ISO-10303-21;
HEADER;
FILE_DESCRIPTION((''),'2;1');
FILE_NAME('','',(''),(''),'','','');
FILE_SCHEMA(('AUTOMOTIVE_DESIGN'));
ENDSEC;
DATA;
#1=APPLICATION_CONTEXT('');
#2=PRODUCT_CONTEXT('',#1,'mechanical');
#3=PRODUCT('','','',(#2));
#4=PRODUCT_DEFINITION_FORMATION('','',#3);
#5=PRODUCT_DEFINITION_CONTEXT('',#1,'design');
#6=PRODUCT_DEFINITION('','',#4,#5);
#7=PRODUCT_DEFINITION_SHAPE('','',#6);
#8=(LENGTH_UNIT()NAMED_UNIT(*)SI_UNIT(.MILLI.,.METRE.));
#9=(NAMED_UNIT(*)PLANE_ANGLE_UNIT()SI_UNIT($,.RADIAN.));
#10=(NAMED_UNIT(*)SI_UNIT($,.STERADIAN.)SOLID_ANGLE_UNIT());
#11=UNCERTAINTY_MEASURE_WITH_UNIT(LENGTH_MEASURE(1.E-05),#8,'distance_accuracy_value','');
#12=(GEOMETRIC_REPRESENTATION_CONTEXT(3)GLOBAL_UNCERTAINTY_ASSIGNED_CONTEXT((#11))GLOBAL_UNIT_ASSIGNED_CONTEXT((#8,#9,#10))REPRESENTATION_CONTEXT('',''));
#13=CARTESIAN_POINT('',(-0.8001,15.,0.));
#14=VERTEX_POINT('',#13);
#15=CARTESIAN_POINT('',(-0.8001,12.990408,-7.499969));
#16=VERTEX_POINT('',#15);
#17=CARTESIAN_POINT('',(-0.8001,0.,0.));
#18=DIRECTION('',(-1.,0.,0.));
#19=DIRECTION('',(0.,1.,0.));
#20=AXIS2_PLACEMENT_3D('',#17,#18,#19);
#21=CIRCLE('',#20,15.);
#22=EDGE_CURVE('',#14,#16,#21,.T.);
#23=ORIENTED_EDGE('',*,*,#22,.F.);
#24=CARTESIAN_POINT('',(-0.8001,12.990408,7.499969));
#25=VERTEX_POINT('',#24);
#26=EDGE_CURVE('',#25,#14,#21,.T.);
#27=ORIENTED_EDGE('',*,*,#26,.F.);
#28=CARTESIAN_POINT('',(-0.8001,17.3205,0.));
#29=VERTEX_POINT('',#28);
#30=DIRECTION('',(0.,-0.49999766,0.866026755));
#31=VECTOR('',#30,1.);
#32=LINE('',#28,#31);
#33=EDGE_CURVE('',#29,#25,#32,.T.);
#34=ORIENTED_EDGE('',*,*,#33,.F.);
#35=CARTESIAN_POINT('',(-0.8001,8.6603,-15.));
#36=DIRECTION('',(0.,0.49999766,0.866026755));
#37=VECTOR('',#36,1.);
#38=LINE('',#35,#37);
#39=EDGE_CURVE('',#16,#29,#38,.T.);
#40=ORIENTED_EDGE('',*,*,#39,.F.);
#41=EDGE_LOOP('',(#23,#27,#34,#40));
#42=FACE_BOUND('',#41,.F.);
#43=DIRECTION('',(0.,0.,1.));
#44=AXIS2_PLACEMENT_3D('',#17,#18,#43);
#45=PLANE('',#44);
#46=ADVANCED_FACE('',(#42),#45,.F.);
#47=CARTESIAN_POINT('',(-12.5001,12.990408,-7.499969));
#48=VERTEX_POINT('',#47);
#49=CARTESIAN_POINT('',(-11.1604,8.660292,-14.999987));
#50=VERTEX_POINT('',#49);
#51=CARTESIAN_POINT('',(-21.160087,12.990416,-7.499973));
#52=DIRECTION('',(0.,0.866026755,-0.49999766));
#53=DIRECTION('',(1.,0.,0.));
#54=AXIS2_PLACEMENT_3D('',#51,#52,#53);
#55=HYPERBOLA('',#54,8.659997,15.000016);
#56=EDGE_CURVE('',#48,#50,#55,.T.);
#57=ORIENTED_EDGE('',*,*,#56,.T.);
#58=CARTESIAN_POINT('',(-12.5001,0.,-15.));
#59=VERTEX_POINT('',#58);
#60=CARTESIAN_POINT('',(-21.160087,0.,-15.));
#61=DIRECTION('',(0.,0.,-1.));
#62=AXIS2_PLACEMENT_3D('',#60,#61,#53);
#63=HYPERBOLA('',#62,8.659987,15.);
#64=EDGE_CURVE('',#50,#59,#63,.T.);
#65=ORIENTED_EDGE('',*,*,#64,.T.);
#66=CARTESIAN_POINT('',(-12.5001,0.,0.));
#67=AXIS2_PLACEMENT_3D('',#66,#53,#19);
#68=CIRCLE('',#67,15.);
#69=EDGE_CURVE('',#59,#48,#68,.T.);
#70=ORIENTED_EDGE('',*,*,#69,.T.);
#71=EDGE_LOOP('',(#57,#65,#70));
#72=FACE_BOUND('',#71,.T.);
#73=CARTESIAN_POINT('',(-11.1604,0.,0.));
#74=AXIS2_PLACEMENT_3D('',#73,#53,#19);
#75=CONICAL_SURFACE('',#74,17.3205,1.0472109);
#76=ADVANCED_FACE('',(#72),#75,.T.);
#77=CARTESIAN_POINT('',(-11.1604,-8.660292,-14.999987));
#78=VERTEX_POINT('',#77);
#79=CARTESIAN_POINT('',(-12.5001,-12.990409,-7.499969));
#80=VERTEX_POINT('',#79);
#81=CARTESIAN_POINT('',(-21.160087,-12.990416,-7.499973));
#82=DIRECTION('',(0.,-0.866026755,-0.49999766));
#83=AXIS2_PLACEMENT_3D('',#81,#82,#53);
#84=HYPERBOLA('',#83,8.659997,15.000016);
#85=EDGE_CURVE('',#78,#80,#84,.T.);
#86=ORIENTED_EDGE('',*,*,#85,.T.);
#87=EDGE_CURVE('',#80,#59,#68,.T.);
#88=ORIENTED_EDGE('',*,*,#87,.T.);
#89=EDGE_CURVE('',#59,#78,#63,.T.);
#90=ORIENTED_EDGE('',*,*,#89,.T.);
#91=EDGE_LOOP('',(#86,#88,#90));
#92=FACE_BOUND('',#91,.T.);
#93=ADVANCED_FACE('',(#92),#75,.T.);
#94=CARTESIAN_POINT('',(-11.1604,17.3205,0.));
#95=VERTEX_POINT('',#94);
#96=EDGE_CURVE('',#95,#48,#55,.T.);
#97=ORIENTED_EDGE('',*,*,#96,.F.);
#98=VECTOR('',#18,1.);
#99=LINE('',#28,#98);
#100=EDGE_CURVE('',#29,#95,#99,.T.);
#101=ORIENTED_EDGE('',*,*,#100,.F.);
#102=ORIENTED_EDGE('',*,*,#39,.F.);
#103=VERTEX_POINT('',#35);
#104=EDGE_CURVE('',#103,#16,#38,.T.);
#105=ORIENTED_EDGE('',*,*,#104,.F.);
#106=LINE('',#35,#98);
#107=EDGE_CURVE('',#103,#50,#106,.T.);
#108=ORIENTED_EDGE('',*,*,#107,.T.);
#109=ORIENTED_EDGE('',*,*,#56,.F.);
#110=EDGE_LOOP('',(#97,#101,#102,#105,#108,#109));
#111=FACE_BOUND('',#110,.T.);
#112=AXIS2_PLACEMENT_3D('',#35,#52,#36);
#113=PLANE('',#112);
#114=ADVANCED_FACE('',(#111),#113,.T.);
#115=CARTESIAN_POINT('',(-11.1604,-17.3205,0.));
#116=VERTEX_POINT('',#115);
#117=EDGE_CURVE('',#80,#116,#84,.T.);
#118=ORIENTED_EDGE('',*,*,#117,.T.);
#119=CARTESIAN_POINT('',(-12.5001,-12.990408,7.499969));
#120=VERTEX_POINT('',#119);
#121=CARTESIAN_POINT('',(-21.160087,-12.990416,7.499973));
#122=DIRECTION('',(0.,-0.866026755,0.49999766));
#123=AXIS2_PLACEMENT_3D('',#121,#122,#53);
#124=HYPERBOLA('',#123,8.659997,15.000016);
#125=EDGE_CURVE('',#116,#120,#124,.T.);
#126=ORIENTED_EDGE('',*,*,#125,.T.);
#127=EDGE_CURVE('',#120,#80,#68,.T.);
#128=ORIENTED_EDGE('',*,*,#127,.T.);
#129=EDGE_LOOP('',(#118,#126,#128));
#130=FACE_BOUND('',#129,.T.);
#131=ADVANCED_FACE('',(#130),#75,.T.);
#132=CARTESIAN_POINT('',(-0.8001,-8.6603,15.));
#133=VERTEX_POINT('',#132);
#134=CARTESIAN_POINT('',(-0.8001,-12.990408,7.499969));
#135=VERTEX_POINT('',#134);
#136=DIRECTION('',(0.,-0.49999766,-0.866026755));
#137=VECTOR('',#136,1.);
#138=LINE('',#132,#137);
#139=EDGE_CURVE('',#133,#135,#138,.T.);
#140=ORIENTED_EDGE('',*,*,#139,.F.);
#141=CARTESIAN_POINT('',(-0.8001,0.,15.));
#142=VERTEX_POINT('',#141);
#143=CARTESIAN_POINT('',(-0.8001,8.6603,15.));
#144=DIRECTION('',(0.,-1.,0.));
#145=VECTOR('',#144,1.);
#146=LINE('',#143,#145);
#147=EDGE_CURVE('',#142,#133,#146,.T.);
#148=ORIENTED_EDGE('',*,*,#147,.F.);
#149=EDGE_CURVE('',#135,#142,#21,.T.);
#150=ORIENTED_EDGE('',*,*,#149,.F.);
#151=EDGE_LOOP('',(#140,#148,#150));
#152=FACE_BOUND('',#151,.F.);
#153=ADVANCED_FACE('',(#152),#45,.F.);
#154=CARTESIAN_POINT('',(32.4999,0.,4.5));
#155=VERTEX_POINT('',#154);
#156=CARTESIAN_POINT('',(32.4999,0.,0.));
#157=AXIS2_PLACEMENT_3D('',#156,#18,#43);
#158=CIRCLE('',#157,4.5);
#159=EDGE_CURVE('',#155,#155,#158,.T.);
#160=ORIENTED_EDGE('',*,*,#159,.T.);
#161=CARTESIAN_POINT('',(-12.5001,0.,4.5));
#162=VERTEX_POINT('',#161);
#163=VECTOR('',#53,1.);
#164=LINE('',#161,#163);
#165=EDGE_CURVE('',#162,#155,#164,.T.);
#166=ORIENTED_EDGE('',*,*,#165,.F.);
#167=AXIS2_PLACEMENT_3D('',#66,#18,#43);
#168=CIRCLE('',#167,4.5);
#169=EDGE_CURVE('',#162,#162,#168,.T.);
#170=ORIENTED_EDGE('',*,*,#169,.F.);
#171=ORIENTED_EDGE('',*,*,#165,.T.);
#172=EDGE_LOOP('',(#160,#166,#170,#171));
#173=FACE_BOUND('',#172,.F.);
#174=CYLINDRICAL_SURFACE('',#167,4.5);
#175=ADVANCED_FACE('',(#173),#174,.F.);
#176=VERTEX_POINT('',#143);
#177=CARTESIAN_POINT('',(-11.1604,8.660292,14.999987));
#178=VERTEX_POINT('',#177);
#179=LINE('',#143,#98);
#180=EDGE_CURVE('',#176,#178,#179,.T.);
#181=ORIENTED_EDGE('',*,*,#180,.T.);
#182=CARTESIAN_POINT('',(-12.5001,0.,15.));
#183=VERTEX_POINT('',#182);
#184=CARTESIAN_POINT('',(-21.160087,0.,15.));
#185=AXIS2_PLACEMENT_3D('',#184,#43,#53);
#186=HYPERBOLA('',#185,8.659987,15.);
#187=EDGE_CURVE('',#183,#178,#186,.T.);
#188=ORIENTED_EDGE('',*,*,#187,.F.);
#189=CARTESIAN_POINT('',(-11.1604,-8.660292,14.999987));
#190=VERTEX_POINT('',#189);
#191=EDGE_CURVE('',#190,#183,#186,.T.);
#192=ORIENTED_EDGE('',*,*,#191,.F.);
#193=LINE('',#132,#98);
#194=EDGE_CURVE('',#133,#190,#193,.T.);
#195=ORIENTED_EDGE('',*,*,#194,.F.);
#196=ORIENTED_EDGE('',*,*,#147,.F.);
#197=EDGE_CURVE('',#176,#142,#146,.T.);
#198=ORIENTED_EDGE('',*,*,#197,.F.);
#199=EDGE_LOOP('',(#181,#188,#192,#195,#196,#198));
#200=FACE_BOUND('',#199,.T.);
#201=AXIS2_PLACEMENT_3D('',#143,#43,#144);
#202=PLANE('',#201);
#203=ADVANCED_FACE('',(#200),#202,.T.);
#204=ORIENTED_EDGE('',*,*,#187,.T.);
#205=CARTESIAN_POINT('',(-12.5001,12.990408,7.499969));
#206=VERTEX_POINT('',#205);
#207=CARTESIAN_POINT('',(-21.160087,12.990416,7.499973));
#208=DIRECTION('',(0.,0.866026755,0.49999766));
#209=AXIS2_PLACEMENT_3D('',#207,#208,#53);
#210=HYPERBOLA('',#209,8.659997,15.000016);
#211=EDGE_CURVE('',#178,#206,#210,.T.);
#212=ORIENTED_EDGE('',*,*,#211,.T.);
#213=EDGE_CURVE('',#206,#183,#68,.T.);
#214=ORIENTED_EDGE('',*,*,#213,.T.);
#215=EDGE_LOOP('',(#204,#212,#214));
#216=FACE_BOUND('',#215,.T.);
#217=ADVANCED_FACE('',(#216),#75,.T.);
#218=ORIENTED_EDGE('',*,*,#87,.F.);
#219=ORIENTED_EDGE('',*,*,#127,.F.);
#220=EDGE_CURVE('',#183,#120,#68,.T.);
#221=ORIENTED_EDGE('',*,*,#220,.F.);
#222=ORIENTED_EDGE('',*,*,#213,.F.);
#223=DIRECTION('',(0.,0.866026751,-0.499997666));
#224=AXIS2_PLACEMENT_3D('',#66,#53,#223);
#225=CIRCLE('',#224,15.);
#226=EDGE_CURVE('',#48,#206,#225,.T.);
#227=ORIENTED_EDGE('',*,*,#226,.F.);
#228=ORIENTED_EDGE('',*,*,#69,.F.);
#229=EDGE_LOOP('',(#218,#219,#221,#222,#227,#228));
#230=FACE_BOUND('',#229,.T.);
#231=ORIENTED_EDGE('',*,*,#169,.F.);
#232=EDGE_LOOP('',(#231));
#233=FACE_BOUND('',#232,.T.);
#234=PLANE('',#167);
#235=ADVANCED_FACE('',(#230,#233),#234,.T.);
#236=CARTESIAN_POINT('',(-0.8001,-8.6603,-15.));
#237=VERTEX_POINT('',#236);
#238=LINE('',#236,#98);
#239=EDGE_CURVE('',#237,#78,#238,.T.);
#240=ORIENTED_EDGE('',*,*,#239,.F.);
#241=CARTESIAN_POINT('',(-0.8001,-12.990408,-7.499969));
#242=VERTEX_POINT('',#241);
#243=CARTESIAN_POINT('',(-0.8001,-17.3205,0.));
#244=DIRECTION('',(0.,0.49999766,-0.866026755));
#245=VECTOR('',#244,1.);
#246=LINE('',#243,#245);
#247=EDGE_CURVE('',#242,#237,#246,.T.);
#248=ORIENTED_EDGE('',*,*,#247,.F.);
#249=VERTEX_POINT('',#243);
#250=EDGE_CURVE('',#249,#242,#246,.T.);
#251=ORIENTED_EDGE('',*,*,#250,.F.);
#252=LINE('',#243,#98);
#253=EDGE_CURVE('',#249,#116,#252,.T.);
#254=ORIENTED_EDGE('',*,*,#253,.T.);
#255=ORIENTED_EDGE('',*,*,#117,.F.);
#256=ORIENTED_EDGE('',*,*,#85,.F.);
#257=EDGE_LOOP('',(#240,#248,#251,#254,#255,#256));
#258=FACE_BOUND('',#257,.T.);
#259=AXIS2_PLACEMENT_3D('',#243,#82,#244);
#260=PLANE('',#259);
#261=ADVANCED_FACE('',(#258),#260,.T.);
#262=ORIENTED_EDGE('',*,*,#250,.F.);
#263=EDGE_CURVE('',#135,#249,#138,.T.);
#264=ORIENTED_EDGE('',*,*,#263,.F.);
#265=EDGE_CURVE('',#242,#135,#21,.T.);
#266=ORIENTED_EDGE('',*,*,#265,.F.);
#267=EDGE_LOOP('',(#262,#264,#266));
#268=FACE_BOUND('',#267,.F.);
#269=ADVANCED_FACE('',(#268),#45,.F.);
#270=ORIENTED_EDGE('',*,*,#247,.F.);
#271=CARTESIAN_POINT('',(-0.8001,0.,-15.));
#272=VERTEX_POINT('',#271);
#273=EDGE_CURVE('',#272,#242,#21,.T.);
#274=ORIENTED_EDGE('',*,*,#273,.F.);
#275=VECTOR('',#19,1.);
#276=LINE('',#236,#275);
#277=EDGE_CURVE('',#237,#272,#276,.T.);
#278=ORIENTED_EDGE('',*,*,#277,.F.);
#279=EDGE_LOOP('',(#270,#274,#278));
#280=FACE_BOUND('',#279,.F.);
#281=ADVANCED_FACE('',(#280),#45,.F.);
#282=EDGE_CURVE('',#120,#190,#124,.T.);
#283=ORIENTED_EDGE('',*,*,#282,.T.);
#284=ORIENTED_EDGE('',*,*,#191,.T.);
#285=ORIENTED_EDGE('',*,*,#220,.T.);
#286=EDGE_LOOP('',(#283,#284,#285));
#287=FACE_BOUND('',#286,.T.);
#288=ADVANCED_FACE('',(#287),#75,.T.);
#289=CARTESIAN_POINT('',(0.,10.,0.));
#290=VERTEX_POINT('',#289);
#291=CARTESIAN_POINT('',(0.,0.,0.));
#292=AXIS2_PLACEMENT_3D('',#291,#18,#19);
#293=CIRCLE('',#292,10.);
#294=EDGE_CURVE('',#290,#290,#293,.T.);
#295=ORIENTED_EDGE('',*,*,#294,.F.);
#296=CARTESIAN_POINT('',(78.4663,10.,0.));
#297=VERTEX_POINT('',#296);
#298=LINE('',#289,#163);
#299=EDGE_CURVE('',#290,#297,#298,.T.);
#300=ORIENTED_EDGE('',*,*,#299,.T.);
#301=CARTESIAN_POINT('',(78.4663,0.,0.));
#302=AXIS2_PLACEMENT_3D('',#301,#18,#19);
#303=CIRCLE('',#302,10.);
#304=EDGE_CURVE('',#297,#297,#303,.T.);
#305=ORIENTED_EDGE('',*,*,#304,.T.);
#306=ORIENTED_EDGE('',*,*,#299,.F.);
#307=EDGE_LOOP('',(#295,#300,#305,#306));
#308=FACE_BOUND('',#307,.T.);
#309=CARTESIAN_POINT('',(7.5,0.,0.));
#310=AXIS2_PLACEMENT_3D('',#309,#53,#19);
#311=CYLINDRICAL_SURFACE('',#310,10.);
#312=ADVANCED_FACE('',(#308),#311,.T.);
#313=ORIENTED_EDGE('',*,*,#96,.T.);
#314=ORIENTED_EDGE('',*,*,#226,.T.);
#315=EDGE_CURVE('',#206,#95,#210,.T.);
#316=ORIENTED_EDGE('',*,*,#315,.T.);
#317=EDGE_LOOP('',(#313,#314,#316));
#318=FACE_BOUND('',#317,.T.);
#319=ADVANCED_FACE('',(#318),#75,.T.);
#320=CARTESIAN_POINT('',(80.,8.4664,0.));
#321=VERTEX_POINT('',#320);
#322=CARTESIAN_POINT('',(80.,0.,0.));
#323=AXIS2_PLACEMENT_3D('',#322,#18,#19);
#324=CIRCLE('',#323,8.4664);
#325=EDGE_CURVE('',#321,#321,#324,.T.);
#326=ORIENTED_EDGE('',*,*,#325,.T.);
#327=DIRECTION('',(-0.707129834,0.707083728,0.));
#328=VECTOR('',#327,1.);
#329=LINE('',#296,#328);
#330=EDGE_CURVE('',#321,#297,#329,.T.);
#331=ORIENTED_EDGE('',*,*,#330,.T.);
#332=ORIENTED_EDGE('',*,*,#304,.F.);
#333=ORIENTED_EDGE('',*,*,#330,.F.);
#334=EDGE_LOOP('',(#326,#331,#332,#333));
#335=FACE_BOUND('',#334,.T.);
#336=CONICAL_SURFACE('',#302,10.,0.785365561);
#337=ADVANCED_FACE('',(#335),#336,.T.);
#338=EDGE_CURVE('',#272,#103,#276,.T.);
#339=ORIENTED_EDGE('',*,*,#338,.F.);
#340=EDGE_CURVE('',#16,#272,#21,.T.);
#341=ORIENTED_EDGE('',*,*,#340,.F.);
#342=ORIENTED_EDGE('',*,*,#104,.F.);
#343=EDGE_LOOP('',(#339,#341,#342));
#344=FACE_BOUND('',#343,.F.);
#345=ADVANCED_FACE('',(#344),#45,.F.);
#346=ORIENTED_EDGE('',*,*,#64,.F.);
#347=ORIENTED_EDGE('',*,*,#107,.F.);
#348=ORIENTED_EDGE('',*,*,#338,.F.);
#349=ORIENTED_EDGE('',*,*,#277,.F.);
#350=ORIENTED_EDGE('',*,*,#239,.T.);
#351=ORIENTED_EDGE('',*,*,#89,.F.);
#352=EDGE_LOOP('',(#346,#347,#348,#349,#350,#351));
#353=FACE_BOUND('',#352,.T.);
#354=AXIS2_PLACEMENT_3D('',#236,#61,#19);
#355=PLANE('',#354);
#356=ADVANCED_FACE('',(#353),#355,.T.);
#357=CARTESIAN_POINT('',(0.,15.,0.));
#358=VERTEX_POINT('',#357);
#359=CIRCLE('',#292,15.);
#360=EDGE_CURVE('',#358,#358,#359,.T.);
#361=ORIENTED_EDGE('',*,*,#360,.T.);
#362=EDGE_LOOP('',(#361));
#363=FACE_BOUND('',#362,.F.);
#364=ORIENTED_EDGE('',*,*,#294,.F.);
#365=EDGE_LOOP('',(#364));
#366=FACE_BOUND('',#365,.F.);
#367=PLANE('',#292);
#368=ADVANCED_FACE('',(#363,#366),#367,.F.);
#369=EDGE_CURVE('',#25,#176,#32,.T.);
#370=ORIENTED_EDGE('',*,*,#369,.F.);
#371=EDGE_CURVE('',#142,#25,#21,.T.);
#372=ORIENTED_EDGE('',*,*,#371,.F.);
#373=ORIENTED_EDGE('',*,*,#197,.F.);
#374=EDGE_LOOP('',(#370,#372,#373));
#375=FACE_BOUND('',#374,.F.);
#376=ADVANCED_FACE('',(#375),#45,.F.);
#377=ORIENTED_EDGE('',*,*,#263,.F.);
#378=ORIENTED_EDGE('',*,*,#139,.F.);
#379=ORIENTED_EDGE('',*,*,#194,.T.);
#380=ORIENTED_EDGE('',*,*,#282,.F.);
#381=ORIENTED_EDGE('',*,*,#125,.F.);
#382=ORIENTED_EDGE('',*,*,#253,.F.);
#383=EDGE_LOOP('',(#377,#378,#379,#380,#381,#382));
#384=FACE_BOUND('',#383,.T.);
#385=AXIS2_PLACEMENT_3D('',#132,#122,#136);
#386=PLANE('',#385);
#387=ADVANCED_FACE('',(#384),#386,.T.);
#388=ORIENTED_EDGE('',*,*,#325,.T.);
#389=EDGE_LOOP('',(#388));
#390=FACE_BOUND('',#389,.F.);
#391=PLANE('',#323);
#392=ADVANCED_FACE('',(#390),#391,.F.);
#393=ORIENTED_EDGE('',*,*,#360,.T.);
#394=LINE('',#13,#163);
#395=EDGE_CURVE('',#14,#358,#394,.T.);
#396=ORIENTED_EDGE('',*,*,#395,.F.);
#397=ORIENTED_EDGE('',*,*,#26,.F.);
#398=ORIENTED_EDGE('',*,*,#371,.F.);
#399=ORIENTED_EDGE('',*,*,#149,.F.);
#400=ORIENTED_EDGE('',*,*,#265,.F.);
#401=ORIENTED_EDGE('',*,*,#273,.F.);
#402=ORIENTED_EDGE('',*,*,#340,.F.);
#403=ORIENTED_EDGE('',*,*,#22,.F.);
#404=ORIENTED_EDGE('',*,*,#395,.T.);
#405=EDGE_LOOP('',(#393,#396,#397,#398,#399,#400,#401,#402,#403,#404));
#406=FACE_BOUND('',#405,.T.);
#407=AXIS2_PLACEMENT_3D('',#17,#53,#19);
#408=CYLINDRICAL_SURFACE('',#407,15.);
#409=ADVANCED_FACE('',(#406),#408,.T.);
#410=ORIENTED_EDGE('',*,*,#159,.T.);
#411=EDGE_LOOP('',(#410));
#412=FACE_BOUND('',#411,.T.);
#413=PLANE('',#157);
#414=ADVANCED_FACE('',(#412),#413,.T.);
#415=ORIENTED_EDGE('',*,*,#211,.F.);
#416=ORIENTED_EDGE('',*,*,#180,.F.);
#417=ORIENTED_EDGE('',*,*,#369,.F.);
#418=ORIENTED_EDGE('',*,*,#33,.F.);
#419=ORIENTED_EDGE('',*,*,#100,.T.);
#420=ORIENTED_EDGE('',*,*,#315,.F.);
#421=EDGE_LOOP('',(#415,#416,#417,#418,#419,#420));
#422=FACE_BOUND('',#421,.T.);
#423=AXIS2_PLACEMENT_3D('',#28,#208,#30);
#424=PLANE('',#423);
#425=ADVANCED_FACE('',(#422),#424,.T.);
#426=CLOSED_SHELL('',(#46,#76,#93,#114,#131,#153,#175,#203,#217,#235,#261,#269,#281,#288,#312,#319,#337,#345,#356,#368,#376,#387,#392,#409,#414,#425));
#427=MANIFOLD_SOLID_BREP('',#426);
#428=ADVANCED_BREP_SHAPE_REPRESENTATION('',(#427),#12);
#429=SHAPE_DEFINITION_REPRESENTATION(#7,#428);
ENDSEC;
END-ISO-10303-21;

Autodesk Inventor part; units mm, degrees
ref_plane "YZ Plane" through (0, 0, 0) normal (1, 0, 0) x (0, 1, 0)
ref_plane "XZ Plane" through (0, 0, 0) normal (0, 1, 0) x (-1, 0, 0)
sketch "Sketch1" plane through (0, 0, 0) normal (0, 0, 1) x (1, 0, 0)
  line L0 (0, 15) -> (0, 10)
  line L1 (7.5, 10) -> (80, 10)
  line L2 (80, 10) -> (80, 0)
  line L3 (80, 0) -> (-0.8001, 0)
  line L4 (-16.9601, 0) -> (96.16, 0) projected
  line L5 (-0.8001, 0) -> (-0.8001, 15)
  line L6 (-0.8001, 15) -> (0, 15)
  line L7 (7.5, 10) -> (5.9663, 10)
  line L8 (5.9663, 10) -> (0, 10)
  line L9 (0, -3) -> (0, 18) projected
  dimension "d0" = 80
  dimension "d1" = 72.5
  dimension "d2" = 20
  dimension "d9" = 0.8001
  dimension "d10" = 30
  dimension "d13" = 1.5337
  dimension "d14" = 20
revolve "Body" add sketch "Sketch1" angle 360 about axis through (80, 0, 0) along (-1, 0, 0)
sketch "Sketch2" plane through (-0.8001, 0, 0) normal (-1, 0, 0) x (0, 0, 1)
  line L0 (0, 17.3205) -> (15, 8.6603)
  line L1 (15, 8.6603) -> (15, -8.6603)
  line L2 (15, -8.6603) -> (0, -17.3205)
  line L3 (0, -17.3205) -> (-15, -8.6603)
  line L4 (-15, -8.6603) -> (-15, 8.6603)
  line L5 (-15, 8.6603) -> (0, 17.3205)
  point P0 (0, 0)
  point P1 (0, 0)
  dimension "d11" = 30
extrude "Head" add sketch "Sketch2" along normal blind 11.7
sketch "Sketch4" plane through (0, 0, 0) normal (0, 0, 1) x (1, 0, 0)
  line L0 (-12.5001, 15) -> (-12.5001, 17.3205)
  line L1 (-12.5001, 17.3205) -> (-11.1604, 17.3205)
  line L2 (-11.1604, 17.3205) -> (-12.5001, 15)
  line L3 (-14.8401, 0) -> (1.5399, 0) projected
  line L4 (-0.8001, 17.3205) -> (-12.5001, 17.3205) projected
  line L5 (-12.5001, 8.6603) -> (-12.5001, 17.3205) projected
  dimension "d5" = 30
  dimension "d19" = 30
revolve "Chamfer1" cut sketch "Sketch4" angle 360 about axis through (-10, 0, 0) along (1, 0, 0)
thread "Thread" size "M20x2.5" class "6g" standard "ISO Metric profile" length 72.5
chamfer "Chamfer2" distance 1.5336 distance2 1.5337 1 edges at (80, -10, 0) measured on face at (80, -2.8768, 3.7595)
ref_plane "Work Plane1" through (1.525, 0, 0) normal (0, 0, 1) x (1, 0, 0)
sketch "Sketch7" plane through (-12.5001, 0, 0) normal (-1, 0, 0) x (0, 0, 1)
  circle A0 centre (0, 0) radius 4.5
  dimension "d59" = 9
extrude "Extrusion5" cut sketch "Sketch7" against normal blind 45
equation "\"d11\" = SW"
equation "\"d3\" = KOH - SD"
equation "\"d15\" = GEL"
equation "\"d6\" = -0.5 * SPD + 0.5 * GD"
equation "\"d0\" = NLG"
equation "\"d1\" = GEL"
equation "\"d2\" = GD"
equation "\"d10\" = SD2"
equation "\"d14\" = BDM"
equation "\"d5\" = ANG1"
equation "\"d19\" = SW0"
equation "\"NLG\" = 80"
equation "\"GD\" = NND"
equation "\"BDM\" = NND"
equation "\"KOH\" = 12.5"
equation "\"GEL\" = 72.5"
equation "\"SW\" = 30"
equation "\"SW0\" = SW"
equation "\"SPD\" = NND - 1.2269 * PTC"
equation "\"SD2\" = SW"
equation "\"SD\" = 0.8"
equation "\"ANG1\" = 30deg"
equation "\"GAL\" = 0.61345 * PTC"
equation "\"GUL\" = 0.61345 * PTC"
equation "\"RR\" = 0.8"
equation "\"WFT\" = SD"
equation "\"GD1\" = THREADDIA - 1.2269 * PTC"
equation "\"TOA\" = 30deg"
equation "\"FAWI\" = 45deg"
equation "\"PTC\" = 2.5"
equation "\"E0\" = 1.155 * SW"
equation "\"NND\" = 20"
equation "\"THREADDIA\" = 20"
properties part number "AS 1110 - M20 x 80" material "Steel, Mild"
